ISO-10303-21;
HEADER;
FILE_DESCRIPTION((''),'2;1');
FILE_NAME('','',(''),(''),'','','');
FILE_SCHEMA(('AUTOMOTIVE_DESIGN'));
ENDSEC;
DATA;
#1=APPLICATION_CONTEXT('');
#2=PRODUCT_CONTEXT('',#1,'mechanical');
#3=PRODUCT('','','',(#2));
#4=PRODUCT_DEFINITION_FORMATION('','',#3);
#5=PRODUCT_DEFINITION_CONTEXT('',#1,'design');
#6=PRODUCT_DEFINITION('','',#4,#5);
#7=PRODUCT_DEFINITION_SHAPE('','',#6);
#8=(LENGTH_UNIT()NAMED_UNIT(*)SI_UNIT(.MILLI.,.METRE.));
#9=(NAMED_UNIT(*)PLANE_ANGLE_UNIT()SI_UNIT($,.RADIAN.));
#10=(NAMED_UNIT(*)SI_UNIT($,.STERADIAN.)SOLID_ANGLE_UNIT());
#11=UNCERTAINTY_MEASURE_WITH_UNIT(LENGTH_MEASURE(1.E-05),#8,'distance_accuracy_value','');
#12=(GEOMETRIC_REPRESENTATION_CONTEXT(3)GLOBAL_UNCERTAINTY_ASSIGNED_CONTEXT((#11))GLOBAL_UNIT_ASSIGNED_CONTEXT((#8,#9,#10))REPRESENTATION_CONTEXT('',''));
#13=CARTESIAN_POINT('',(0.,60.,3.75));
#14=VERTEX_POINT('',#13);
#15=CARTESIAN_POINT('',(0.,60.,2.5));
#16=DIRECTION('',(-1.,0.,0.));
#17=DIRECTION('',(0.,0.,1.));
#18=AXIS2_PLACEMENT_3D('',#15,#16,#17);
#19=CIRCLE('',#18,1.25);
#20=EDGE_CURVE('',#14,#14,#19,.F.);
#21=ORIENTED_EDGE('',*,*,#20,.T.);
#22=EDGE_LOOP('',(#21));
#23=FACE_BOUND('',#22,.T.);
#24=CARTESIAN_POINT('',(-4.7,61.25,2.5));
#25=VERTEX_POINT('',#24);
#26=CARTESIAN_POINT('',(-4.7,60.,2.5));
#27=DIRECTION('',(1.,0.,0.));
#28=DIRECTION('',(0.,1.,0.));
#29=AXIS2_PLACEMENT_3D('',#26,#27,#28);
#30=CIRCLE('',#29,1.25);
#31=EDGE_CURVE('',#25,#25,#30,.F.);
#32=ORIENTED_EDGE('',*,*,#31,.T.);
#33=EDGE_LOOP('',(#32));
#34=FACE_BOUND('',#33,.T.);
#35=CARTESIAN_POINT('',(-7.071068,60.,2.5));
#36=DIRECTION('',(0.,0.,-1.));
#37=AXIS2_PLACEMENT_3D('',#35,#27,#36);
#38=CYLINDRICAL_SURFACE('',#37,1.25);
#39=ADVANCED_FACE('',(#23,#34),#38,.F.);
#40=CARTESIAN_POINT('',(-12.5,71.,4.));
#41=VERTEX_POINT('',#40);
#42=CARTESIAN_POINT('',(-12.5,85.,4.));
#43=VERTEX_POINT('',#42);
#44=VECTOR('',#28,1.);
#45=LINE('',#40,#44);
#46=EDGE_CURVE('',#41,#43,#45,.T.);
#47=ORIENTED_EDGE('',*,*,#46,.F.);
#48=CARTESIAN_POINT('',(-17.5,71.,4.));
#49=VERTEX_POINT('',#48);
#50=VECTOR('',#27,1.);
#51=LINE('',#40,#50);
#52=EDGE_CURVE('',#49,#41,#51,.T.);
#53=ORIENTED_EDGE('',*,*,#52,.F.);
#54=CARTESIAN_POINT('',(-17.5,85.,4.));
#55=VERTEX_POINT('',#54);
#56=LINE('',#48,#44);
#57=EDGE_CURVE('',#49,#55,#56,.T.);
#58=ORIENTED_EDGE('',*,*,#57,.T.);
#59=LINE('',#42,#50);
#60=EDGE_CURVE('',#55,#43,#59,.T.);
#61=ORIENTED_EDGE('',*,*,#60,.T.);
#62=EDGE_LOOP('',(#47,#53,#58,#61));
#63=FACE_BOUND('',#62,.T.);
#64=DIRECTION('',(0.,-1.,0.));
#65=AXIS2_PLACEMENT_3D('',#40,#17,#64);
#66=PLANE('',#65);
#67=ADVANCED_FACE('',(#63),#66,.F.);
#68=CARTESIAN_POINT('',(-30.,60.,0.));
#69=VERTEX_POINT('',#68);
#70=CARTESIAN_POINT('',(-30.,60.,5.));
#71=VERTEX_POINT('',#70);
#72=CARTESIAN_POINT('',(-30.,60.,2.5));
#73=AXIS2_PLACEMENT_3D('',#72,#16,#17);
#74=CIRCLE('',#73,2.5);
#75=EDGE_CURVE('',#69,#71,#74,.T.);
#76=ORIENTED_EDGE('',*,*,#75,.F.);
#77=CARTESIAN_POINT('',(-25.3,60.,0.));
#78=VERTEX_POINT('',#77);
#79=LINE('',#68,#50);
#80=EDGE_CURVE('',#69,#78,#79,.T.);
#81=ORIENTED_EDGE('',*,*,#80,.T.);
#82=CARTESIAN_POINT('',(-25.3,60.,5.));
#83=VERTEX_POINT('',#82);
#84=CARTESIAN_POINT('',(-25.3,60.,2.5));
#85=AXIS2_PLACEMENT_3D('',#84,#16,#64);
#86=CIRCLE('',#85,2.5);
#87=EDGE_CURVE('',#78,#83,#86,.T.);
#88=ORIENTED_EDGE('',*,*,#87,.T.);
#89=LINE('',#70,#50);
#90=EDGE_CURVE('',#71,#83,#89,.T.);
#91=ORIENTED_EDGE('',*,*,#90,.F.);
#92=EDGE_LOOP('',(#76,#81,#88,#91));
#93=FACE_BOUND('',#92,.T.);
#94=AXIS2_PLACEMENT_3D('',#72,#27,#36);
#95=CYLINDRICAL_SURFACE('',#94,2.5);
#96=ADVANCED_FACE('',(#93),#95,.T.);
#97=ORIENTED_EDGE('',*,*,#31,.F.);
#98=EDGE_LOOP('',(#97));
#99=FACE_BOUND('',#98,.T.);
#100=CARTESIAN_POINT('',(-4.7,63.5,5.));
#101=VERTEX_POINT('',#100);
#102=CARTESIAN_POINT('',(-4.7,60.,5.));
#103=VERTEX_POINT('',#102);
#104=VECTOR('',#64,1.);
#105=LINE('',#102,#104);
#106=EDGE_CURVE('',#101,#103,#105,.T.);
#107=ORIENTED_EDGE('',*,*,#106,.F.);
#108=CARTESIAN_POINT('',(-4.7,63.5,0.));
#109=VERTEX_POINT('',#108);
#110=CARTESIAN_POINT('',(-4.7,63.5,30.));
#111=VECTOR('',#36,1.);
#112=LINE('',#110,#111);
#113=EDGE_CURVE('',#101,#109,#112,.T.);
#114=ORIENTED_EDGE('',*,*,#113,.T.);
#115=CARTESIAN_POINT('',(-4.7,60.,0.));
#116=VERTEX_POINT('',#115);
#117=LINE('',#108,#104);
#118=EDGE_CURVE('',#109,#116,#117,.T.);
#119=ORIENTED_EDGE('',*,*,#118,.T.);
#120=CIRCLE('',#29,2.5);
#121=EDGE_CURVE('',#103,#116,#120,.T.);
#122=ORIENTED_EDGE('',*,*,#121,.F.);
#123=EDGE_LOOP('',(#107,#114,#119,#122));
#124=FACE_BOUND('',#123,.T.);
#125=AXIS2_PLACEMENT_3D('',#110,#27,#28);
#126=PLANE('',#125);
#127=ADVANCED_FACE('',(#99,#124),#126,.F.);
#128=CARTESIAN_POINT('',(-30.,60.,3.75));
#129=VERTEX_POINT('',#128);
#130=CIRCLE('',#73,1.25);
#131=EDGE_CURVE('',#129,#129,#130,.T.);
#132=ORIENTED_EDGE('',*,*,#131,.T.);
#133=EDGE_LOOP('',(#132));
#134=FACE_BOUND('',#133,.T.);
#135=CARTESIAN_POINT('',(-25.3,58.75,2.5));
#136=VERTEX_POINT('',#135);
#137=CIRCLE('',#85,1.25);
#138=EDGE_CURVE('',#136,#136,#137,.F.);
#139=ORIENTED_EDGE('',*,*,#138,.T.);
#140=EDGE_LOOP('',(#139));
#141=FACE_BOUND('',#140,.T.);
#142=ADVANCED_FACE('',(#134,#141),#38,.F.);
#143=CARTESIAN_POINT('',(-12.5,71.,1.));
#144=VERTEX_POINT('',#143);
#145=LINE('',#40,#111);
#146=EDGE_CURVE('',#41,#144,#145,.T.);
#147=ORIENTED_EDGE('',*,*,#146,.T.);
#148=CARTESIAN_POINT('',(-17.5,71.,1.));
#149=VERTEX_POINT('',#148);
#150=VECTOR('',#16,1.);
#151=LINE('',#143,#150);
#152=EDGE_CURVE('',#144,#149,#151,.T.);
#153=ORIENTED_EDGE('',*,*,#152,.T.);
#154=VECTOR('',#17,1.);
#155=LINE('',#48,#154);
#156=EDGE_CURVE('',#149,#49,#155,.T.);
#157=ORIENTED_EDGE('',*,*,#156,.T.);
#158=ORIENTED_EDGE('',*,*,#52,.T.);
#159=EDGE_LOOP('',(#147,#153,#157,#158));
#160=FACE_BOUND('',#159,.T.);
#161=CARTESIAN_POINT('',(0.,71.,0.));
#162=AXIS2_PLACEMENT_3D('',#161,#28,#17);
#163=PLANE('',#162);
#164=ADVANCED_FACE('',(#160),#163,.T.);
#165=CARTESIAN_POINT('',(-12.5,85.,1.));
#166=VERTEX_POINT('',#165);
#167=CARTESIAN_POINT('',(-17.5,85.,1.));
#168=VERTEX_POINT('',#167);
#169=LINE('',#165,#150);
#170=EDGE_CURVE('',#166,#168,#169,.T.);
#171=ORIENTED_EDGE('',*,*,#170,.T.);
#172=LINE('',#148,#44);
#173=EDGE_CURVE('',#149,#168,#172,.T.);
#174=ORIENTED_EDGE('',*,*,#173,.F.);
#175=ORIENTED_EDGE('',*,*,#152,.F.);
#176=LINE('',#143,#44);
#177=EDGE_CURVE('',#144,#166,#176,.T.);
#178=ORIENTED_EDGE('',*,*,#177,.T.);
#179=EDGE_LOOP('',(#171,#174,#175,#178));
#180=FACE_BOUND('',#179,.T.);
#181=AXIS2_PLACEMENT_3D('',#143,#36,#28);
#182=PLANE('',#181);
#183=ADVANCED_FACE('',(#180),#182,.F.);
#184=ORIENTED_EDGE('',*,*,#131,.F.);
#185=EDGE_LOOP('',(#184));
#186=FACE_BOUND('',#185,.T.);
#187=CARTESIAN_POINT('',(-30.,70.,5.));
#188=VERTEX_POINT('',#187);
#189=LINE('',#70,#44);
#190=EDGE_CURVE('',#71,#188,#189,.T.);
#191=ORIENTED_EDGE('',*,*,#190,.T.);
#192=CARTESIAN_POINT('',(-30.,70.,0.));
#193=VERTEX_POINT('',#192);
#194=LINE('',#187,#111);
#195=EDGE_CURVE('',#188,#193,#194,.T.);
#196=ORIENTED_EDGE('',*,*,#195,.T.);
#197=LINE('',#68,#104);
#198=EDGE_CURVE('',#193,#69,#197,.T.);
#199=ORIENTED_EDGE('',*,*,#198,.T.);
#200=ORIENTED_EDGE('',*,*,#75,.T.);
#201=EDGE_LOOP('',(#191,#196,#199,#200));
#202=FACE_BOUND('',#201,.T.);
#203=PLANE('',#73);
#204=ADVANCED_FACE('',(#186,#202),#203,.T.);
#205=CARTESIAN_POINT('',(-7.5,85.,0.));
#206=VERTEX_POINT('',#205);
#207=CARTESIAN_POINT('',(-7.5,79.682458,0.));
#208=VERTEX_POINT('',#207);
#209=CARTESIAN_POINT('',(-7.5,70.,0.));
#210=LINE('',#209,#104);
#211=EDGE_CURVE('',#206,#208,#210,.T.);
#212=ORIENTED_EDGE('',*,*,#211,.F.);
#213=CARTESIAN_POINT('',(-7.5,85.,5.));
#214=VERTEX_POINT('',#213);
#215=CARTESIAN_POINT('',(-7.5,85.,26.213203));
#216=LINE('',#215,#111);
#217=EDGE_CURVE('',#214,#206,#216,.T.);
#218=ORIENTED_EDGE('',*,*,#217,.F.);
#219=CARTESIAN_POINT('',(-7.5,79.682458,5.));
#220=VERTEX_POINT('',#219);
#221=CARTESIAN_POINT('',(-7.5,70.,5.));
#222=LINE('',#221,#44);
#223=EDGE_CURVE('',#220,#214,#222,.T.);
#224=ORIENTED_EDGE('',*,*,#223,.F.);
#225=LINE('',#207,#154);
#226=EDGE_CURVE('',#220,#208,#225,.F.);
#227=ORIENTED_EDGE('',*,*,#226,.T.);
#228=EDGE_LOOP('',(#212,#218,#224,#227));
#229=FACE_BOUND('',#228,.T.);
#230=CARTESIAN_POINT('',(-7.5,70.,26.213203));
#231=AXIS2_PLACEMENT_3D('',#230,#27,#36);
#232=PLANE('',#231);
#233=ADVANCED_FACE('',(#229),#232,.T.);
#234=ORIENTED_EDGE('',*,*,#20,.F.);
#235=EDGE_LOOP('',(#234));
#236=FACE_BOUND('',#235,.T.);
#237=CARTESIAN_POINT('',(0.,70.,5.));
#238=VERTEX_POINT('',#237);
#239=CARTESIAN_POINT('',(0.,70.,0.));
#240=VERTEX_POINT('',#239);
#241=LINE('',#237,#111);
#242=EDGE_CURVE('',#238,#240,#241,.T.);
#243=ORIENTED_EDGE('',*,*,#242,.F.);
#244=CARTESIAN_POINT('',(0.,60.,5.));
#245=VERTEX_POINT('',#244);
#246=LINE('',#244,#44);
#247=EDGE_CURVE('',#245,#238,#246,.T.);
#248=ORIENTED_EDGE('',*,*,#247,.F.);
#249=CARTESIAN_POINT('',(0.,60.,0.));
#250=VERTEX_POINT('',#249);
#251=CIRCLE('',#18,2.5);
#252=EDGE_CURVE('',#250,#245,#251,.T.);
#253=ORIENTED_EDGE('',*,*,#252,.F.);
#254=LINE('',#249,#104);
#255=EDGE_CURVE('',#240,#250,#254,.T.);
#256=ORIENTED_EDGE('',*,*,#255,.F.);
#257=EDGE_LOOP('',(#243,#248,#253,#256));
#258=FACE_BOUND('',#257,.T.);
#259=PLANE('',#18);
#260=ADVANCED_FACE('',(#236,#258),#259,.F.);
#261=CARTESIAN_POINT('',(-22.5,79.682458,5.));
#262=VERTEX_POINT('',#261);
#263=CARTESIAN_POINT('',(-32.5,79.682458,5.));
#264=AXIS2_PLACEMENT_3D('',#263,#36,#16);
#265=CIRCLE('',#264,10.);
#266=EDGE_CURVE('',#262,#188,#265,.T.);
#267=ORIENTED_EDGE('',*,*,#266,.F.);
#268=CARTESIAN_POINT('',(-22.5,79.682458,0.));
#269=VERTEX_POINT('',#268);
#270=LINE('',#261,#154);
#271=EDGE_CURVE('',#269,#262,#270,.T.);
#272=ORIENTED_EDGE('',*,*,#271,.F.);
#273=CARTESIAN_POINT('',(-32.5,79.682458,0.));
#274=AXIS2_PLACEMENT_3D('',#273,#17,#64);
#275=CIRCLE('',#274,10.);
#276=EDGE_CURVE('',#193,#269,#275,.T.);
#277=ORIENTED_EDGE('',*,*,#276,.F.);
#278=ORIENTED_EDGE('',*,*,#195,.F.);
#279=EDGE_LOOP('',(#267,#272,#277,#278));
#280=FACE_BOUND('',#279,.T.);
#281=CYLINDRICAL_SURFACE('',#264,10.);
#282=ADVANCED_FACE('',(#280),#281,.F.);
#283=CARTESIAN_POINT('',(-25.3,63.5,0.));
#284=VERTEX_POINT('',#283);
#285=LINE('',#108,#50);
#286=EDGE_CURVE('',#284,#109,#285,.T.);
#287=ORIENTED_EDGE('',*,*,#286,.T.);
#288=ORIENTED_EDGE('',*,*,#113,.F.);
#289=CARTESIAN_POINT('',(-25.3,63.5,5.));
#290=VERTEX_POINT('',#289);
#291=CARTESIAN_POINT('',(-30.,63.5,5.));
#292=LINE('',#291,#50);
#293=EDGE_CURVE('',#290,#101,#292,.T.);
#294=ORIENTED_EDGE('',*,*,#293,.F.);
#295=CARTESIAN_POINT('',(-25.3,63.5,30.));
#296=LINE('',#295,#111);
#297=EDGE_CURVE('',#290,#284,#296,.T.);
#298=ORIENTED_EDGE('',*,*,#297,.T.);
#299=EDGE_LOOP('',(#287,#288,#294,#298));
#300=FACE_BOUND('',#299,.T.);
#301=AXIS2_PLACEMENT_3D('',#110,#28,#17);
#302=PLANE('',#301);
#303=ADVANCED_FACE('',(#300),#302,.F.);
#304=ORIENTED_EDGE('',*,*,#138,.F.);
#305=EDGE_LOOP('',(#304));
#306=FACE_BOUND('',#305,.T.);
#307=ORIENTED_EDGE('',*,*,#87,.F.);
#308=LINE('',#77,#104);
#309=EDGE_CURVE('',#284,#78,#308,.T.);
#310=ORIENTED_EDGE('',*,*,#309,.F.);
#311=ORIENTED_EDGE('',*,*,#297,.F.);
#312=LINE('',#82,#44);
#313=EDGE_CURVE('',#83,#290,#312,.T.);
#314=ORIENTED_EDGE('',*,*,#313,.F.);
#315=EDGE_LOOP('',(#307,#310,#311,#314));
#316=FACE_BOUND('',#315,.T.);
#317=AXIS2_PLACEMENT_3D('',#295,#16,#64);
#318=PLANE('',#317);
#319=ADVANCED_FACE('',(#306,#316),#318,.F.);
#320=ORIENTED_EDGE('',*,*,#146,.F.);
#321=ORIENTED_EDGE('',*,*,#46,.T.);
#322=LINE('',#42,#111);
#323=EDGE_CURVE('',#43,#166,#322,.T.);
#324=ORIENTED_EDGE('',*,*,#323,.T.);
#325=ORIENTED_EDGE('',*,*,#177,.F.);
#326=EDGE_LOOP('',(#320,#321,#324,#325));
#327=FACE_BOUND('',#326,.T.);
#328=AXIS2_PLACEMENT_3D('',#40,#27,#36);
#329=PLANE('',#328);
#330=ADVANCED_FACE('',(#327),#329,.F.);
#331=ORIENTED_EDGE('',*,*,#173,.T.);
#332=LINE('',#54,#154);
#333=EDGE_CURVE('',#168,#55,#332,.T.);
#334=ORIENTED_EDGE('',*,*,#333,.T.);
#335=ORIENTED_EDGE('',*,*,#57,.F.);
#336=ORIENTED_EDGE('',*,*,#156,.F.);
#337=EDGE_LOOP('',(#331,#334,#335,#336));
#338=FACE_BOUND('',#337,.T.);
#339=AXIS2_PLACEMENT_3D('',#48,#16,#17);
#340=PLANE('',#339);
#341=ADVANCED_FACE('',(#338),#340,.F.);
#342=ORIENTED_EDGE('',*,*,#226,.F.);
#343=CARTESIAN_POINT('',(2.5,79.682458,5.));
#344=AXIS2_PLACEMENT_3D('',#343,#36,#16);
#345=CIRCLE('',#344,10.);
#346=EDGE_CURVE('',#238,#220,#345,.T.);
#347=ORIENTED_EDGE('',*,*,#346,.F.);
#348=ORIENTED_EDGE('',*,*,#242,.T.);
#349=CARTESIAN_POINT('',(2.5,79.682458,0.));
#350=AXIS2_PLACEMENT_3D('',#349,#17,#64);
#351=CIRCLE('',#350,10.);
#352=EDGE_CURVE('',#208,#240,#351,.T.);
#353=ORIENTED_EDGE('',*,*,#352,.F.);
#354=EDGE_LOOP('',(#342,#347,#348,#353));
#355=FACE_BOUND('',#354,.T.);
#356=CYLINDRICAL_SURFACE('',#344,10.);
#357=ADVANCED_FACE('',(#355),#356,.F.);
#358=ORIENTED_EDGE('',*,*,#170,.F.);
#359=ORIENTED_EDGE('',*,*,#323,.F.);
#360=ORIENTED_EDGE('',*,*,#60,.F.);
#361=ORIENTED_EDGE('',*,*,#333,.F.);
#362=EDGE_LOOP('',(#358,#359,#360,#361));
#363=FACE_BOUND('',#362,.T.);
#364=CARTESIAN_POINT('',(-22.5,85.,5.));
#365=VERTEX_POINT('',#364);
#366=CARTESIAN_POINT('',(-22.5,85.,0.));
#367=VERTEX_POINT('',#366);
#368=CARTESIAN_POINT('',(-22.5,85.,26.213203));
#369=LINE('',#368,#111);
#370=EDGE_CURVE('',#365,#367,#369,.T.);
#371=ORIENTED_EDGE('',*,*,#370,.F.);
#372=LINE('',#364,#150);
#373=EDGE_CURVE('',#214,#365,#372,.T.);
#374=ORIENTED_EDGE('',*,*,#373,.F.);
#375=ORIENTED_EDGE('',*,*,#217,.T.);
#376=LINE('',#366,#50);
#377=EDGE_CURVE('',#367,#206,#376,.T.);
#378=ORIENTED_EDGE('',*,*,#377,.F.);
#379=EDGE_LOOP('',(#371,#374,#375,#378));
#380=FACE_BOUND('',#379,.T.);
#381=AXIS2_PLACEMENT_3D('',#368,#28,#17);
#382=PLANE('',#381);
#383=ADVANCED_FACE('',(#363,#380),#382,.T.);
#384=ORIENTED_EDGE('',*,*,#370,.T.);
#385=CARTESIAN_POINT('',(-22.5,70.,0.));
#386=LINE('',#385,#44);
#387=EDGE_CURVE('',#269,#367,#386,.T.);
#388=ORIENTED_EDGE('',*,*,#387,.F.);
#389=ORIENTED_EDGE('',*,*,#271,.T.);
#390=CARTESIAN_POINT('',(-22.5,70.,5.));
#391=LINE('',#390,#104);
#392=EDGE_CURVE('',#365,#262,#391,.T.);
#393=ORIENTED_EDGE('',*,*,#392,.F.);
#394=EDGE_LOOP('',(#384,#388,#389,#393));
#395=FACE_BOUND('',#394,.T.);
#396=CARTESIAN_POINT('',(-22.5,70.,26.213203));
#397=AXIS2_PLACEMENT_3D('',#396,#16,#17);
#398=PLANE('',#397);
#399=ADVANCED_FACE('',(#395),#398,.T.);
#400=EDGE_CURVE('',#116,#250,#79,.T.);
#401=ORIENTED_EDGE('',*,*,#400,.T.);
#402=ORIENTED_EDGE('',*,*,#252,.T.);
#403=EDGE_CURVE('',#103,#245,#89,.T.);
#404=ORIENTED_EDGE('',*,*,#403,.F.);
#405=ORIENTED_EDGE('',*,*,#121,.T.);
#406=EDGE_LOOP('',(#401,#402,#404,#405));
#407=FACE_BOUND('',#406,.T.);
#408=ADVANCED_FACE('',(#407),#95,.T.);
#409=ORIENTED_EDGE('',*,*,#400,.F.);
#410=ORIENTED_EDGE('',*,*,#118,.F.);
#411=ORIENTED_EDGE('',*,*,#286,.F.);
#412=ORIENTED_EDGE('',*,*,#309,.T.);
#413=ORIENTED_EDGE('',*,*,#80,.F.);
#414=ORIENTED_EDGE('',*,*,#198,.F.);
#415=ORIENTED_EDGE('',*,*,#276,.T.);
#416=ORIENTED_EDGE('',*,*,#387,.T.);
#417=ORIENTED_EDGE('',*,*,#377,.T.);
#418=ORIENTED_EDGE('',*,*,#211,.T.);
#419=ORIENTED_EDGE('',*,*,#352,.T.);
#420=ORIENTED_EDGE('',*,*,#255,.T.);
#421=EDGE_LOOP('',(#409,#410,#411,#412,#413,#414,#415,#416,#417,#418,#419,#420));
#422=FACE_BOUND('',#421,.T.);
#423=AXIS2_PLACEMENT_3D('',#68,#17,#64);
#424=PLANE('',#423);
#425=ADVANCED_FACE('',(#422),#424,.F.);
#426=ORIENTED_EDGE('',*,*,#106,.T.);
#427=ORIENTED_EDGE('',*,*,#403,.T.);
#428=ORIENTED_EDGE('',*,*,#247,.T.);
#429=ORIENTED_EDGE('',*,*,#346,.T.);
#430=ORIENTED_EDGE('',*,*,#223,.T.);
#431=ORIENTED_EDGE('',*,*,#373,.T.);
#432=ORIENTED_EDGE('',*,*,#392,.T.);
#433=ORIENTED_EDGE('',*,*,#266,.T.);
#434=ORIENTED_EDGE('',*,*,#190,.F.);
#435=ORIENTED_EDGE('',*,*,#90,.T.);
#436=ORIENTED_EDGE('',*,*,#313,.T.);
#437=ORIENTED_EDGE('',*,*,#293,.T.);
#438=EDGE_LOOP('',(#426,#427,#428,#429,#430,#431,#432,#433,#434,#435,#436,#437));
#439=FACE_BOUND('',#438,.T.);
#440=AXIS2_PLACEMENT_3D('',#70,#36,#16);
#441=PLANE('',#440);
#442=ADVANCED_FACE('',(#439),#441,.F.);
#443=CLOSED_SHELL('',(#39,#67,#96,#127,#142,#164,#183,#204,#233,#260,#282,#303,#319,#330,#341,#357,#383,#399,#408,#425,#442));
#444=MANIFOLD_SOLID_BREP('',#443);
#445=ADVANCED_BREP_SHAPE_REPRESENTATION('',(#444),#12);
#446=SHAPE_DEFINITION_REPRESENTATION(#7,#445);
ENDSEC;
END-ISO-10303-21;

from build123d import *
from build123d.topology import SkipClean

# Parameters (mm, degrees)
SKETCH1_W           = 20
SKETCH1_H           = 60
BOSS_EXTRUDE1_DEPTH = 5
SKETCH2_R           = 2.5
SKETCH2_R_2         = 1.25
BOSS_EXTRUDE2_DEPTH = 20
CUT_EXTRUDE1_START  = -29
SKETCH3_R           = 1.25
CUT_EXTRUDE1_DEPTH  = 29
SKETCH4_R           = 2.5
SKETCH4_R_2         = 1.25
BOSS_EXTRUDE3_DEPTH = 20
CUT_EXTRUDE2_START  = -29
SKETCH5_R           = 1.25
CUT_EXTRUDE2_DEPTH  = 29
SKETCH6_R           = 1.25
BOSS_EXTRUDE4_DEPTH = 30
SKETCH7_W           = 20.6
SKETCH7_H           = 7
CUT_EXTRUDE3_DEPTH  = 30
SKETCH8_W           = 60.511546569
SKETCH8_H           = 78.563917263
CUT_EXTRUDE4_DEPTH  = 41
SKETCH13_W          = 15
SKETCH13_H          = 15
BOSS_EXTRUDE6_DEPTH = 5
FILLET1_R           = 10
SKETCH14_W          = 5
SKETCH14_H          = 3
CUT_EXTRUDE6_DEPTH  = 14


with BuildPart() as part:
    # Sketch1 → Boss-Extrude1 (new body)
    with BuildSketch(Plane.XY):
        with Locations((10, 30)):
            Rectangle(SKETCH1_W, SKETCH1_H)
    extrude(amount=BOSS_EXTRUDE1_DEPTH)

    # Sketch2 → Boss-Extrude2 (add)
    with BuildSketch(Plane(origin=(20, 0, 0), x_dir=(0, 0, -1), z_dir=(1, 0, 0))):
        with Locations((-2.5, 60)):
            Circle(SKETCH2_R)
        with Locations((-2.5, 60)):
            Circle(SKETCH2_R_2, mode=Mode.SUBTRACT)
    extrude(amount=-BOSS_EXTRUDE2_DEPTH)

    # Sketch3 → Cut-Extrude1 (cut)
    with SkipClean():  # the faces are left unmerged after this step: merging them gives an invalid solid
        with BuildSketch(Plane.ZY.offset(CUT_EXTRUDE1_START)):
            with Locations(Location((2.5, 60, 0), (0, 0, 180))):
                Circle(SKETCH3_R)
        extrude(amount=CUT_EXTRUDE1_DEPTH, mode=Mode.SUBTRACT)

    # Sketch4 → Boss-Extrude3 (add)
    with BuildSketch(Plane.ZY):
        with Locations((2.5, 0)):
            Circle(SKETCH4_R)
        with Locations((2.5, 0)):
            Circle(SKETCH4_R_2, mode=Mode.SUBTRACT)
    extrude(amount=-BOSS_EXTRUDE3_DEPTH)

    # Sketch5 → Cut-Extrude2 (cut)
    with SkipClean():  # the faces are left unmerged after this step: merging them gives an invalid solid
        with BuildSketch(Plane(origin=(20, 0, 0), x_dir=(0, 0, -1), z_dir=(1, 0, 0)).offset(CUT_EXTRUDE2_START)):
            with Locations(Location((-2.5, 0, 0), (0, 0, 180))):
                Circle(SKETCH5_R)
        extrude(amount=CUT_EXTRUDE2_DEPTH, mode=Mode.SUBTRACT)

    # Sketch6 → Boss-Extrude4 (add)
    with SkipClean():  # the faces are left unmerged after this step: merging them gives an invalid solid
        with BuildSketch(Plane.ZY):
            with BuildLine():
                Line((5, 60), (5, 70))
                Line((5, 70), (0, 70))
                Line((0, 70), (0, 60))
                ThreePointArc((0, 60), (2.5, 57.5), (5, 60))
            make_face()
            with Locations(Location((2.5, 60, 0), (0, 0, 180))):
                Circle(SKETCH6_R, mode=Mode.SUBTRACT)
        extrude(amount=BOSS_EXTRUDE4_DEPTH)

    # Sketch7 → Cut-Extrude3 (cut)
    with SkipClean():  # the faces are left unmerged after this step: merging them gives an invalid solid
        with BuildSketch(Plane(origin=(0, 0, 0), x_dir=(-1, 0, 0), z_dir=(0, 0, -1))):
            with Locations((15, 60)):
                Rectangle(SKETCH7_W, SKETCH7_H)
        extrude(amount=-CUT_EXTRUDE3_DEPTH, mode=Mode.SUBTRACT)

    # Sketch8 → Cut-Extrude4 (cut)
    with BuildSketch(Plane.ZY):
        with Locations((2.066743104, 31.078249137)):
            Rectangle(SKETCH8_W, SKETCH8_H)
    extrude(amount=-CUT_EXTRUDE4_DEPTH, mode=Mode.SUBTRACT)

    # Sketch13 → Boss-Extrude6 (add)
    with BuildSketch(Plane(origin=(0, 0, 0), x_dir=(-1, 0, 0), z_dir=(0, 0, -1))):
        with Locations((15, 77.5)):
            Rectangle(SKETCH13_W, SKETCH13_H)
    extrude(amount=-BOSS_EXTRUDE6_DEPTH)

    # Fillet1
    # the kernel refuses this fillet: 10 mm, written as the material it adds along each edge
    with BuildSketch(Plane(origin=(-22.5, 70, 0), x_dir=(-1, 0, 0), z_dir=(0, 0, 1))) as fillet1_piece_1:
        with BuildLine():
            CenterArc((10, -9.682458366), FILLET1_R, 104.477512186, 75.522487814)
            Line((0, -9.682458366), (-0.2, -9.682458366))
            Line((-0.2, -9.682458366), (-0.2, 0))
            Line((-0.2, 0), (0, 0.2))
            ThreePointArc((0, 0.2), (3.75, 0.2), (7.45, 0.193649167))
            Line((7.45, 0.193649167), (7.5, 0))
        make_face()
    extrude(amount=5)
    with BuildSketch(Plane(origin=(-7.5, 70, 0), x_dir=(1, 0, 0), z_dir=(0, 0, 1))) as fillet1_piece_2:
        with BuildLine():
            CenterArc((10, 9.682458366), FILLET1_R, 180, 75.522487814)
            Line((0, 9.682458366), (-0.2, 9.682458366))
            Line((-0.2, 9.682458366), (-0.2, 0))
            Line((-0.2, 0), (0, -0.2))
            ThreePointArc((0, -0.2), (3.75, -0.2), (7.45, -0.193649167))
            Line((7.45, -0.193649167), (7.5, 0))
        make_face()
    extrude(amount=5)

    # Sketch14 → Cut-Extrude6 (cut)
    with BuildSketch(Plane(origin=(0, 85, 0), x_dir=(1, 0, 0), z_dir=(0, 1, 0))):
        with Locations((-15, -2.5)):
            Rectangle(SKETCH14_W, SKETCH14_H)
    extrude(amount=-CUT_EXTRUDE6_DEPTH, mode=Mode.SUBTRACT)


solid = part.part
